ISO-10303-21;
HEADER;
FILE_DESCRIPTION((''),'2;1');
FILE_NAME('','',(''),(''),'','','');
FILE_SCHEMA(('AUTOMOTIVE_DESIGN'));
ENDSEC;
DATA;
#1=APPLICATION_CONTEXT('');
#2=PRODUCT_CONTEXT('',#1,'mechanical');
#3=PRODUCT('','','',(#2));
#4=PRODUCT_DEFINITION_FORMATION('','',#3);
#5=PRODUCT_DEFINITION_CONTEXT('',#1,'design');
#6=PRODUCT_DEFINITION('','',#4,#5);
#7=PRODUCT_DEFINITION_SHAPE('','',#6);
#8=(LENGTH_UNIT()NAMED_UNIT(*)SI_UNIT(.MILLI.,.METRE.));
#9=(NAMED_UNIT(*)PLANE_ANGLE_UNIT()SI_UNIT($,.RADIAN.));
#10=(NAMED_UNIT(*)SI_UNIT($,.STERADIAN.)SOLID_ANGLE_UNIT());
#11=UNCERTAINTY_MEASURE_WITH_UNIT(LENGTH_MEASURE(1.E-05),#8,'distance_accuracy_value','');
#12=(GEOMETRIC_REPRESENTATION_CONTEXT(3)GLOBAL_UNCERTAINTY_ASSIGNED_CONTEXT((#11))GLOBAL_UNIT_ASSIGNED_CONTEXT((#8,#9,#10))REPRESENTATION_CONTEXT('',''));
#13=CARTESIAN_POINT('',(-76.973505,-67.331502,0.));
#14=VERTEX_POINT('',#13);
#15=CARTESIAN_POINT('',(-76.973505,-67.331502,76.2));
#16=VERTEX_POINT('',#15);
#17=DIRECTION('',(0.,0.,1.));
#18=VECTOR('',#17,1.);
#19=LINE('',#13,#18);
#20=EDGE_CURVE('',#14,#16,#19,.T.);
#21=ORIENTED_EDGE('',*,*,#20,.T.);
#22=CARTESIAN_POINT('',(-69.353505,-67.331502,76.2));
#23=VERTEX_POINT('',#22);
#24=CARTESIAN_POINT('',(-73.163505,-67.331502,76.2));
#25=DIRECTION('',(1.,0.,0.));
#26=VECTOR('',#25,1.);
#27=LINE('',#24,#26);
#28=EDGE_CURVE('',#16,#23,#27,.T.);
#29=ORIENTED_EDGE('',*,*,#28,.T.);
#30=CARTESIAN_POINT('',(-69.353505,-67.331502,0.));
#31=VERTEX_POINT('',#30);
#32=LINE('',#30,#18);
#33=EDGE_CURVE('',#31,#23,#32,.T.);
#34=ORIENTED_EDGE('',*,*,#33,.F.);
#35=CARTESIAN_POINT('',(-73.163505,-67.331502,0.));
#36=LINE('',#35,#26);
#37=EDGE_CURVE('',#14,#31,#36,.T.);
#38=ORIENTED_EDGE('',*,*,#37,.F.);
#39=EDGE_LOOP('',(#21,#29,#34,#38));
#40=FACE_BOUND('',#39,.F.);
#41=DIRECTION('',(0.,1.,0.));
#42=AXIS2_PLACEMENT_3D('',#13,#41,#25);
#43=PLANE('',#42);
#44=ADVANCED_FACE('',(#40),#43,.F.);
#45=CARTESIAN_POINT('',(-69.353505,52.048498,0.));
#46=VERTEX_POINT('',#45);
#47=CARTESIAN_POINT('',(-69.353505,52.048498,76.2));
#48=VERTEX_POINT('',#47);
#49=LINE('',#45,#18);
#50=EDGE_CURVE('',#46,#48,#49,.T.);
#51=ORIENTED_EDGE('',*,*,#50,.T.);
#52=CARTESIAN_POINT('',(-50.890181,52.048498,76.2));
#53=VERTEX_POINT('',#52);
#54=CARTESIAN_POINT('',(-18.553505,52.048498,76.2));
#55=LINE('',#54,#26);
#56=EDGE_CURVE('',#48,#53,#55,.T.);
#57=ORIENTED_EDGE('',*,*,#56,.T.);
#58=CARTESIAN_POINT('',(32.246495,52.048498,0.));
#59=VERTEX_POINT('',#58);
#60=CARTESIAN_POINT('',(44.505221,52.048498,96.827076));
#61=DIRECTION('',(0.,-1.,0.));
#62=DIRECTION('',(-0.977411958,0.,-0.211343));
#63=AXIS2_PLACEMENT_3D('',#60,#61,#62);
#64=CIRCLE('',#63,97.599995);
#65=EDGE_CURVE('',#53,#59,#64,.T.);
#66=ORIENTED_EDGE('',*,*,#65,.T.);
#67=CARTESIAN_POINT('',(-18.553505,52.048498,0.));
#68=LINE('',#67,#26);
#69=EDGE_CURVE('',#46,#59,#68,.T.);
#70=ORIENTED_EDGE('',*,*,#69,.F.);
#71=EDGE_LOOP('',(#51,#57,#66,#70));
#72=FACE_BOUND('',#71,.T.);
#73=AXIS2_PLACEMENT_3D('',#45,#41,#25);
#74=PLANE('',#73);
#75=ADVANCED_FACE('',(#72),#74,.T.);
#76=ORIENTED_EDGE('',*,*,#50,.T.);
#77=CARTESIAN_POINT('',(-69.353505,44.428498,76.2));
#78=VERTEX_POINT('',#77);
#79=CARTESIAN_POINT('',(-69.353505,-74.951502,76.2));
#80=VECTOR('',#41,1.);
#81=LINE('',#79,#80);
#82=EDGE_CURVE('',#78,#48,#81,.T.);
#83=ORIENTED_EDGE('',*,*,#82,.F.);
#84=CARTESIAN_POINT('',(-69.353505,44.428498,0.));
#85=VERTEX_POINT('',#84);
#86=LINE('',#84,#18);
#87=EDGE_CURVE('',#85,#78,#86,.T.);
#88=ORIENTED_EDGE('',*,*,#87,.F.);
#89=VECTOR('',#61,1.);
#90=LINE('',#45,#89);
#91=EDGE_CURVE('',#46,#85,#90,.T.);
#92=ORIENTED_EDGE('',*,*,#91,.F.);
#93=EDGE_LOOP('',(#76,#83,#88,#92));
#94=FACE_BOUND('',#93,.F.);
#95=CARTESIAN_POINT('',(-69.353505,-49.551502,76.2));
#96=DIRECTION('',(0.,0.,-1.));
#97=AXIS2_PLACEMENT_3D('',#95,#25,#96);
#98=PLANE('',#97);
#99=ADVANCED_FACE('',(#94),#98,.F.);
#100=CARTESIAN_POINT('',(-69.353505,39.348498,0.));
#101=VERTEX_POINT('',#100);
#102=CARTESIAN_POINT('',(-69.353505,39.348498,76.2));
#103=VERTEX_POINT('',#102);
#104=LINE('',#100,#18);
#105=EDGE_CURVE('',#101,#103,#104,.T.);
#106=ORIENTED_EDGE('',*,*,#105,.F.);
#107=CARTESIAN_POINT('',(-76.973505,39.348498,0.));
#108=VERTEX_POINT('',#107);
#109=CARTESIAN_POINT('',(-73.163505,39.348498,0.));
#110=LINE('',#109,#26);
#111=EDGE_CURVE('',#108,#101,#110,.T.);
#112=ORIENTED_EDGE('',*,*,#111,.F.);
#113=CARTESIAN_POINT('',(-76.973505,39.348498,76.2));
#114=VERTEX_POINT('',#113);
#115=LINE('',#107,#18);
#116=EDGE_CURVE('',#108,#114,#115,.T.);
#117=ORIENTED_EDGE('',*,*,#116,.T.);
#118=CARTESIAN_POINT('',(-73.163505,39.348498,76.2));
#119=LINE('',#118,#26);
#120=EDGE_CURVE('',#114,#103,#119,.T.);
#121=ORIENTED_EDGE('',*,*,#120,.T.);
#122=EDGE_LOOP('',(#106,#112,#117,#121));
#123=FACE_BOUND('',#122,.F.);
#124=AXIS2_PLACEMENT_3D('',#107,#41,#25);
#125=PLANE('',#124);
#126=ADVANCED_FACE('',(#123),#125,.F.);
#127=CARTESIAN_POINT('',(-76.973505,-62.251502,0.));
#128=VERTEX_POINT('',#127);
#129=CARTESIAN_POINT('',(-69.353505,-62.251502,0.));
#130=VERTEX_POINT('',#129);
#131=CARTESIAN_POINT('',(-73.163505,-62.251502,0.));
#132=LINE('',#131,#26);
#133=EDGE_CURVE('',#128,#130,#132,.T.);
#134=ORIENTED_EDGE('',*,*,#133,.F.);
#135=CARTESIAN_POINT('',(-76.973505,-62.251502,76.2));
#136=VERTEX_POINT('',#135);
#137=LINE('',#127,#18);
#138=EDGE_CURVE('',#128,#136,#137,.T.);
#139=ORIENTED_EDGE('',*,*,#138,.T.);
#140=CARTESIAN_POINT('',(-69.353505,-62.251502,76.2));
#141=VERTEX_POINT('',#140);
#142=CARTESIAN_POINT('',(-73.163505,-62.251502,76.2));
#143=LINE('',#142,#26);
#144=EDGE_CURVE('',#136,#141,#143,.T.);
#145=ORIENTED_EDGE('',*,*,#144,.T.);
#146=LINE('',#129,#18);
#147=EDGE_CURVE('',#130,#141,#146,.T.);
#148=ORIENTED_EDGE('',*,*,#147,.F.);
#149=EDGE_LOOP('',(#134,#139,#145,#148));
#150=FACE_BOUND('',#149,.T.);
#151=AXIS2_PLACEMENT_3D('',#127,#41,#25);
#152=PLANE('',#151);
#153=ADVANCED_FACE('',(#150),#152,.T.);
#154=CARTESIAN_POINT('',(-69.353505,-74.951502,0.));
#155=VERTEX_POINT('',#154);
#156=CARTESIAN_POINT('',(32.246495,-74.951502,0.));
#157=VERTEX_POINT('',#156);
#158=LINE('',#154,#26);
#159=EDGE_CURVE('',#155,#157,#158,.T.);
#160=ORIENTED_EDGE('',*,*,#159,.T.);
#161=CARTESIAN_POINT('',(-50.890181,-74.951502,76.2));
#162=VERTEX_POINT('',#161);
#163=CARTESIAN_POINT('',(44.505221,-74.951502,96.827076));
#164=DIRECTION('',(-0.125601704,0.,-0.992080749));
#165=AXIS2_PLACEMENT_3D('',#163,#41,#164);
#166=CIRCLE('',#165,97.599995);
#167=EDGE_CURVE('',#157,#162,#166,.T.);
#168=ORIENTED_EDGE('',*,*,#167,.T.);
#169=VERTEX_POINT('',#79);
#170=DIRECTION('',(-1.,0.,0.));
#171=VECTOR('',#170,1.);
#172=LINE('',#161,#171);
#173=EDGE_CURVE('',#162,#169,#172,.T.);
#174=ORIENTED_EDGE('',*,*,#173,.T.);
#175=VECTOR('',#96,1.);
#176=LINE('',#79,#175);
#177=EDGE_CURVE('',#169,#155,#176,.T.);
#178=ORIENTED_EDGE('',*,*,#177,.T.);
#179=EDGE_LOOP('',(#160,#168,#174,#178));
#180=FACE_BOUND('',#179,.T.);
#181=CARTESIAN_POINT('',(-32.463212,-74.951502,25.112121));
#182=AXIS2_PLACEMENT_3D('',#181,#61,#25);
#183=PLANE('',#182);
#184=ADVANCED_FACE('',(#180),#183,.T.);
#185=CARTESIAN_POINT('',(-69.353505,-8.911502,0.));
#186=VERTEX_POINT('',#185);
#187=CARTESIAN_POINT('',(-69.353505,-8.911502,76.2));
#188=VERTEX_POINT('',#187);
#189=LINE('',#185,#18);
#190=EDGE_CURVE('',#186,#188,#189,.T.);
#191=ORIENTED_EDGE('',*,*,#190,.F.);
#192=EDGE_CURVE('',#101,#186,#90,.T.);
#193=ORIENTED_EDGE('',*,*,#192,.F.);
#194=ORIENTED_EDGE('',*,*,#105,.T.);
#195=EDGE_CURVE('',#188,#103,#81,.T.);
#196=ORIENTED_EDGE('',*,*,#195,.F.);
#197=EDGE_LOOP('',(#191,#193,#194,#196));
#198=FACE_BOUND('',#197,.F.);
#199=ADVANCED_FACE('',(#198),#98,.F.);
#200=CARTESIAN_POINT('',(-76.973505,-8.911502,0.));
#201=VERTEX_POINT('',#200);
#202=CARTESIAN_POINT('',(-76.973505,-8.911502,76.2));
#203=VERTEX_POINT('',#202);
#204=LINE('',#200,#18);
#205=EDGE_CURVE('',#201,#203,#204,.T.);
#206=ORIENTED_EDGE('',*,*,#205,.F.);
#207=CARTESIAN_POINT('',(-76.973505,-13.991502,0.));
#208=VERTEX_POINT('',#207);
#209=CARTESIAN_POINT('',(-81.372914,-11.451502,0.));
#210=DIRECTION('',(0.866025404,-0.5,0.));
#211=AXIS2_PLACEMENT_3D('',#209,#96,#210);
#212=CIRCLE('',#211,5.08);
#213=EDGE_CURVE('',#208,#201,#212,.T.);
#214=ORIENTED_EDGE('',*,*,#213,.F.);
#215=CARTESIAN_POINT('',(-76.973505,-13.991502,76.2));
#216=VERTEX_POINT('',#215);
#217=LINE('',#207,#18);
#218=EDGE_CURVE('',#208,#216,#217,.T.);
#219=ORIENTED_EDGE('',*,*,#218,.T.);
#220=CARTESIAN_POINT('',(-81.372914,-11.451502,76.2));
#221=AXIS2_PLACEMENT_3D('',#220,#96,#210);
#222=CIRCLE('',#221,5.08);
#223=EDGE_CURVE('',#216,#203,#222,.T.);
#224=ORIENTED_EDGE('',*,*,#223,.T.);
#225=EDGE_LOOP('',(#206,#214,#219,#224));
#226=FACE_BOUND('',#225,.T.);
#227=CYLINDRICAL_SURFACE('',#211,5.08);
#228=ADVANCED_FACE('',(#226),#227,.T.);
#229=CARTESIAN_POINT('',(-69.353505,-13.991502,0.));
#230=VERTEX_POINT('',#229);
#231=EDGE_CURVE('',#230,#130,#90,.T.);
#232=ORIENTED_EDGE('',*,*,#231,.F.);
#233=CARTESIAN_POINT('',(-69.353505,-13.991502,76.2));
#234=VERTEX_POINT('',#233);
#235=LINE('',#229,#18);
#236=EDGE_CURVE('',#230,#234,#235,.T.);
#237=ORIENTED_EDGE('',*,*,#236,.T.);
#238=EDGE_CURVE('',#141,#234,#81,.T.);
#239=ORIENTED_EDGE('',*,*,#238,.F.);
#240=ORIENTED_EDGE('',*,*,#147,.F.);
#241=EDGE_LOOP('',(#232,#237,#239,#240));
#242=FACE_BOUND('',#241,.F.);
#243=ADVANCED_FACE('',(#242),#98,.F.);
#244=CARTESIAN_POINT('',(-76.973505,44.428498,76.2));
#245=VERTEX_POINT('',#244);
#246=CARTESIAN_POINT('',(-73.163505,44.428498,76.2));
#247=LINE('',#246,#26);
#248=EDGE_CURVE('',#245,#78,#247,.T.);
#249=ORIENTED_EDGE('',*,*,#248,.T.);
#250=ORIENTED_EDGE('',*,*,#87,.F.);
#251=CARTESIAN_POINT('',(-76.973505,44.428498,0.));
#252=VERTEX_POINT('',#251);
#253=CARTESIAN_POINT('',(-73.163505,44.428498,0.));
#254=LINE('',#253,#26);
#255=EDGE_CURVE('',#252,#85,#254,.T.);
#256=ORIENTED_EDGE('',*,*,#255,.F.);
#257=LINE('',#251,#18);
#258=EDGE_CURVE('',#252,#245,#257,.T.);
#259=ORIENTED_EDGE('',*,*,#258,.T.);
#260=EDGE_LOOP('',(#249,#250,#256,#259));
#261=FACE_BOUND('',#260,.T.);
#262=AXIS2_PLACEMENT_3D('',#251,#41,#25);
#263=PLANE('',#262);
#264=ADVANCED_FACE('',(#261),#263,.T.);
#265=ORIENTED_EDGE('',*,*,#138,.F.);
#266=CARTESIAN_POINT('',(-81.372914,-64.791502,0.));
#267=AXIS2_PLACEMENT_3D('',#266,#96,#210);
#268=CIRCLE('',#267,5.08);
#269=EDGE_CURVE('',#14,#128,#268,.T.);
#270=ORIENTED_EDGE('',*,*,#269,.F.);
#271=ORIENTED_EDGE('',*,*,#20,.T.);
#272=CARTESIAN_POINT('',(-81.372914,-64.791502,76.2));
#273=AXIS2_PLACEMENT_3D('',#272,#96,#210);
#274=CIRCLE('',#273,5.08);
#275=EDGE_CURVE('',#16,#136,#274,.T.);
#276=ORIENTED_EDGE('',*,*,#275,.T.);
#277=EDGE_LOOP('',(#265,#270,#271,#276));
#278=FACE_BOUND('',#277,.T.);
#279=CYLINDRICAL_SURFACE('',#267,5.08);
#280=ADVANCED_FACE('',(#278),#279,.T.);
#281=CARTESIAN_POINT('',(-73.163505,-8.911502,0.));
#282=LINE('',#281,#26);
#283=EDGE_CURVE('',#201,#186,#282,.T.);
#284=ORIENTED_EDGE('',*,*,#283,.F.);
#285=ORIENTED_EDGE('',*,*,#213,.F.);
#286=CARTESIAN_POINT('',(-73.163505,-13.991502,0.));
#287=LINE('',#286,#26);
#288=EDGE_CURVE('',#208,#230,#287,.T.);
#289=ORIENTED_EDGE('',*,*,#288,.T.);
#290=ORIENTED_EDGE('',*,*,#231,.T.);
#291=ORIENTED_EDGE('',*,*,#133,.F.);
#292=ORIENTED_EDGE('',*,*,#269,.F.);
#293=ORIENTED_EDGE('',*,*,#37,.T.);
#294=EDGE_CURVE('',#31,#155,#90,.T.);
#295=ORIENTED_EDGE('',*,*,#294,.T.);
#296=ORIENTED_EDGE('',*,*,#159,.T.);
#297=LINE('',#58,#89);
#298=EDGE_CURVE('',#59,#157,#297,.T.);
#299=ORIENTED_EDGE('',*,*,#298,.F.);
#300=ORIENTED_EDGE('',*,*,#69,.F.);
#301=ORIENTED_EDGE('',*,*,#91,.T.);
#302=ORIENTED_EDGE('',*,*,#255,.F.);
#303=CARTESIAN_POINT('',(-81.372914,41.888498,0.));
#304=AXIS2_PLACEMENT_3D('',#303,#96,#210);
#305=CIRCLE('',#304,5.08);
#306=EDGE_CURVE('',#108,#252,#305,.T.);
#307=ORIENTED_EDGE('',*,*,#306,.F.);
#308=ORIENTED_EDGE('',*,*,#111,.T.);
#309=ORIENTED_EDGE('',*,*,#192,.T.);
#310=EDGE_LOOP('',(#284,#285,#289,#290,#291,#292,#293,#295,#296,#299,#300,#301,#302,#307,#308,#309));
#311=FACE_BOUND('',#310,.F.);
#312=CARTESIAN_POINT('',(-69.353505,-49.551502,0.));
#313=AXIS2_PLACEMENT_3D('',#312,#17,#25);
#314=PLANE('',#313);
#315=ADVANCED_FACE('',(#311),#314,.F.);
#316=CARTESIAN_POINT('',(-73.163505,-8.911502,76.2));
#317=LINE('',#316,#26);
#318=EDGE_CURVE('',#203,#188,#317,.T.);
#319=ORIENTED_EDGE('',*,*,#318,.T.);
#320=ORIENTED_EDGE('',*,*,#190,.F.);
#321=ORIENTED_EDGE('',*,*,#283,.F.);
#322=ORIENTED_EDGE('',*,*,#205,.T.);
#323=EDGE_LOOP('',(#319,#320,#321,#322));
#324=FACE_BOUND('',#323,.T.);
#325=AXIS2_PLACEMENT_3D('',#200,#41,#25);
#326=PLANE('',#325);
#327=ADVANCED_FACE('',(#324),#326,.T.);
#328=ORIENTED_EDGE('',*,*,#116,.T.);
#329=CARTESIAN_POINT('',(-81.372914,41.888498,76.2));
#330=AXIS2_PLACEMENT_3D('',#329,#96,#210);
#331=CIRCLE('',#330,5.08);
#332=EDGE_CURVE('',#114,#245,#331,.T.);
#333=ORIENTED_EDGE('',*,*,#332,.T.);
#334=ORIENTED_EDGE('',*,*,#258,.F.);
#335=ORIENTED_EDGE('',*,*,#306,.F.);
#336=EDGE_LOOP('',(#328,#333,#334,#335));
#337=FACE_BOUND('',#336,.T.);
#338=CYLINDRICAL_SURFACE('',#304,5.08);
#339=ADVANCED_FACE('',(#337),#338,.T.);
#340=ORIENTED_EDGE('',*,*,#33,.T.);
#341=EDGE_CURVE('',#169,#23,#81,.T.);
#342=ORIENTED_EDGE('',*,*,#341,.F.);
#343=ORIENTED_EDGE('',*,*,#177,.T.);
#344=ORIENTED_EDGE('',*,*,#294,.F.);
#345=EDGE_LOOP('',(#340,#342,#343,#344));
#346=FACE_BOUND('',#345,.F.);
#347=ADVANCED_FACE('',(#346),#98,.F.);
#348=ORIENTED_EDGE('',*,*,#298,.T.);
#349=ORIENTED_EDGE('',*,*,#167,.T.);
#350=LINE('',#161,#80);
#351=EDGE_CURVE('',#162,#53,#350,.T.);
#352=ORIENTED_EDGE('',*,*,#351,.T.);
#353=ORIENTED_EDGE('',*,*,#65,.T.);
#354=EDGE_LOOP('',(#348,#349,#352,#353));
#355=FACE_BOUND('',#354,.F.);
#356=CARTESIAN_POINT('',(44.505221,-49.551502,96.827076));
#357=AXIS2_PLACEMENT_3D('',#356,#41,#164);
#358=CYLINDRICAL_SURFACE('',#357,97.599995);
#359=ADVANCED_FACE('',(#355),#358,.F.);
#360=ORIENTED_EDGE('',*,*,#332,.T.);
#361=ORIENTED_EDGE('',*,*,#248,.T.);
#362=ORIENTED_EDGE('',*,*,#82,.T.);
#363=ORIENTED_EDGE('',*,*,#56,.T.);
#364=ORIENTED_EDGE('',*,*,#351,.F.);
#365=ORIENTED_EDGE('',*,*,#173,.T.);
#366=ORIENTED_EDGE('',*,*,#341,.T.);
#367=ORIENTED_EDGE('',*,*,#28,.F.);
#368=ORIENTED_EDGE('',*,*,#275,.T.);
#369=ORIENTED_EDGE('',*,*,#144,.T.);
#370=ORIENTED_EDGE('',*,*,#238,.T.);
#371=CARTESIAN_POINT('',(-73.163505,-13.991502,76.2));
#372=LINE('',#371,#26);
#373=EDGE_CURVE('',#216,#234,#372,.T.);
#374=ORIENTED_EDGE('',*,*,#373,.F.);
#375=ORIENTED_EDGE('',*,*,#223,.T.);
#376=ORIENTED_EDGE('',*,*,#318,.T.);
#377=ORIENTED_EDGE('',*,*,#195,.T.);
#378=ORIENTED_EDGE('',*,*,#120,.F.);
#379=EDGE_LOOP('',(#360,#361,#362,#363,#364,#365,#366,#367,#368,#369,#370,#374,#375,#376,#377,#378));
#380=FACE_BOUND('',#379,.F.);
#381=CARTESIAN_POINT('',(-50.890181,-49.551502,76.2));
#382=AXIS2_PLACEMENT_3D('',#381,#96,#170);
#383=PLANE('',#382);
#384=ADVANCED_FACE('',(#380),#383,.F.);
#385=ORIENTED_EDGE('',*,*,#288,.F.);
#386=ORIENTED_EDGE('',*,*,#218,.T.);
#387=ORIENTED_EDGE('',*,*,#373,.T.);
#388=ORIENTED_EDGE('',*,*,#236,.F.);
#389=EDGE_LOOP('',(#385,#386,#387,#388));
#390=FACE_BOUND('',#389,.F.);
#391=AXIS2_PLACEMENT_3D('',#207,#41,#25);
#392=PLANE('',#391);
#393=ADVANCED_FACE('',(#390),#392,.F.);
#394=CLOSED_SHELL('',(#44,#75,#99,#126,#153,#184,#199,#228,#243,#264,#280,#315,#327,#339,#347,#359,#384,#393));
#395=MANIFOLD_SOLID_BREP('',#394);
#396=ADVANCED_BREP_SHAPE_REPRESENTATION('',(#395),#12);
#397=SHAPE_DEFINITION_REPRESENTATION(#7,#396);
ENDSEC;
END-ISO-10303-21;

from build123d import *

# Parameters (mm, degrees)
F0_W     = 101.6
F0_H     = 101.6
F1_DEPTH = 76.2
F3_DEPTH = 101.6
F4_W     = 63.5649934411
F4_H     = 88.8701714575
F5_DEPTH = 7.62
F7_DEPTH = 25.4
F8_W     = 7.62
F8_H     = 5.08
F9_DEPTH = 76.2


# Not quite as in the source:
# - a feature names something its author has since deleted; it is built from what else it names


with BuildPart() as f1:
    # F0 (on Top) → F1 (new body)
    with BuildSketch(Plane.XY):
        with Locations((-18.5535050273, 1.2484980512)):
            Rectangle(F0_W, F0_H)
    extrude(amount=F1_DEPTH)

    # F2 (on face) → F3 (cut)
    with BuildSketch(Plane.XZ.offset(49.5515019488)):
        with BuildLine():
            Line((32.2464949727, 76.2), (-50.8901812136, 76.2))
            ThreePointArc((-50.8901812136, 76.2), (-21.4414456403, 24.8771198137), (32.2464949727, 0))
            Line((32.2464949727, 0), (32.2464949727, 76.2))
        make_face()
    extrude(amount=-F3_DEPTH, mode=Mode.SUBTRACT)

    # F4 (on face) → F5 (join)
    with BuildSketch(Plane(origin=(0, 0, 0), x_dir=(1, 0, 0), z_dir=(0, 0, -1))):
        with Locations((-31.7824967206, -2.1479185671)):
            Rectangle(F4_W, F4_H)
    extrude(amount=-F5_DEPTH)

    # F6 (on face) → F7 (join)
    with BuildSketch(Plane.XZ.offset(49.5515019488)):
        with BuildLine():
            Line((-69.3535050273, 76.2), (-69.3535050273, 0))
            Line((-69.3535050273, 0), (32.2464949727, 0))
            ThreePointArc((32.2464949727, 0), (-21.4414456403, 24.8771198137), (-50.8901812136, 76.2))
            Line((-50.8901812136, 76.2), (-69.3535050273, 76.2))
        make_face()
    extrude(amount=F7_DEPTH)

    # F8 (on face) → F9 (join)
    with BuildSketch(Plane(origin=(0, 0, 0), x_dir=(1, 0, 0), z_dir=(0, 0, -1))):
        with BuildLine():
            Line((-76.9735050273, -44.4284980512), (-76.9735050273, -39.3484980512))
            ThreePointArc((-76.9735050273, -39.3484980512), (-86.4529140785, -41.8884980512), (-76.9735050273, -44.4284980512))
        make_face()
        with Locations((-73.1635050273, -41.8884980512)):
            Rectangle(F8_W, F8_H)
        with BuildLine():
            Line((-76.9735050273, 8.9115019488), (-76.9735050273, 13.9915019488))
            ThreePointArc((-76.9735050273, 13.9915019488), (-86.4529140785, 11.4515019488), (-76.9735050273, 8.9115019488))
        make_face()
        with Locations((-73.1635050273, 11.4515019488)):
            Rectangle(F8_W, F8_H)
        with Locations((-73.1635050273, 64.7915019488)):
            Rectangle(F8_W, F8_H)
        with BuildLine():
            ThreePointArc((-76.9735050273, 67.3315019488), (-86.4529140785, 64.7915019488), (-76.9735050273, 62.2515019488))
            Line((-76.9735050273, 62.2515019488), (-76.9735050273, 67.3315019488))
        make_face()
    extrude(amount=-F9_DEPTH)


solid = f1.part
